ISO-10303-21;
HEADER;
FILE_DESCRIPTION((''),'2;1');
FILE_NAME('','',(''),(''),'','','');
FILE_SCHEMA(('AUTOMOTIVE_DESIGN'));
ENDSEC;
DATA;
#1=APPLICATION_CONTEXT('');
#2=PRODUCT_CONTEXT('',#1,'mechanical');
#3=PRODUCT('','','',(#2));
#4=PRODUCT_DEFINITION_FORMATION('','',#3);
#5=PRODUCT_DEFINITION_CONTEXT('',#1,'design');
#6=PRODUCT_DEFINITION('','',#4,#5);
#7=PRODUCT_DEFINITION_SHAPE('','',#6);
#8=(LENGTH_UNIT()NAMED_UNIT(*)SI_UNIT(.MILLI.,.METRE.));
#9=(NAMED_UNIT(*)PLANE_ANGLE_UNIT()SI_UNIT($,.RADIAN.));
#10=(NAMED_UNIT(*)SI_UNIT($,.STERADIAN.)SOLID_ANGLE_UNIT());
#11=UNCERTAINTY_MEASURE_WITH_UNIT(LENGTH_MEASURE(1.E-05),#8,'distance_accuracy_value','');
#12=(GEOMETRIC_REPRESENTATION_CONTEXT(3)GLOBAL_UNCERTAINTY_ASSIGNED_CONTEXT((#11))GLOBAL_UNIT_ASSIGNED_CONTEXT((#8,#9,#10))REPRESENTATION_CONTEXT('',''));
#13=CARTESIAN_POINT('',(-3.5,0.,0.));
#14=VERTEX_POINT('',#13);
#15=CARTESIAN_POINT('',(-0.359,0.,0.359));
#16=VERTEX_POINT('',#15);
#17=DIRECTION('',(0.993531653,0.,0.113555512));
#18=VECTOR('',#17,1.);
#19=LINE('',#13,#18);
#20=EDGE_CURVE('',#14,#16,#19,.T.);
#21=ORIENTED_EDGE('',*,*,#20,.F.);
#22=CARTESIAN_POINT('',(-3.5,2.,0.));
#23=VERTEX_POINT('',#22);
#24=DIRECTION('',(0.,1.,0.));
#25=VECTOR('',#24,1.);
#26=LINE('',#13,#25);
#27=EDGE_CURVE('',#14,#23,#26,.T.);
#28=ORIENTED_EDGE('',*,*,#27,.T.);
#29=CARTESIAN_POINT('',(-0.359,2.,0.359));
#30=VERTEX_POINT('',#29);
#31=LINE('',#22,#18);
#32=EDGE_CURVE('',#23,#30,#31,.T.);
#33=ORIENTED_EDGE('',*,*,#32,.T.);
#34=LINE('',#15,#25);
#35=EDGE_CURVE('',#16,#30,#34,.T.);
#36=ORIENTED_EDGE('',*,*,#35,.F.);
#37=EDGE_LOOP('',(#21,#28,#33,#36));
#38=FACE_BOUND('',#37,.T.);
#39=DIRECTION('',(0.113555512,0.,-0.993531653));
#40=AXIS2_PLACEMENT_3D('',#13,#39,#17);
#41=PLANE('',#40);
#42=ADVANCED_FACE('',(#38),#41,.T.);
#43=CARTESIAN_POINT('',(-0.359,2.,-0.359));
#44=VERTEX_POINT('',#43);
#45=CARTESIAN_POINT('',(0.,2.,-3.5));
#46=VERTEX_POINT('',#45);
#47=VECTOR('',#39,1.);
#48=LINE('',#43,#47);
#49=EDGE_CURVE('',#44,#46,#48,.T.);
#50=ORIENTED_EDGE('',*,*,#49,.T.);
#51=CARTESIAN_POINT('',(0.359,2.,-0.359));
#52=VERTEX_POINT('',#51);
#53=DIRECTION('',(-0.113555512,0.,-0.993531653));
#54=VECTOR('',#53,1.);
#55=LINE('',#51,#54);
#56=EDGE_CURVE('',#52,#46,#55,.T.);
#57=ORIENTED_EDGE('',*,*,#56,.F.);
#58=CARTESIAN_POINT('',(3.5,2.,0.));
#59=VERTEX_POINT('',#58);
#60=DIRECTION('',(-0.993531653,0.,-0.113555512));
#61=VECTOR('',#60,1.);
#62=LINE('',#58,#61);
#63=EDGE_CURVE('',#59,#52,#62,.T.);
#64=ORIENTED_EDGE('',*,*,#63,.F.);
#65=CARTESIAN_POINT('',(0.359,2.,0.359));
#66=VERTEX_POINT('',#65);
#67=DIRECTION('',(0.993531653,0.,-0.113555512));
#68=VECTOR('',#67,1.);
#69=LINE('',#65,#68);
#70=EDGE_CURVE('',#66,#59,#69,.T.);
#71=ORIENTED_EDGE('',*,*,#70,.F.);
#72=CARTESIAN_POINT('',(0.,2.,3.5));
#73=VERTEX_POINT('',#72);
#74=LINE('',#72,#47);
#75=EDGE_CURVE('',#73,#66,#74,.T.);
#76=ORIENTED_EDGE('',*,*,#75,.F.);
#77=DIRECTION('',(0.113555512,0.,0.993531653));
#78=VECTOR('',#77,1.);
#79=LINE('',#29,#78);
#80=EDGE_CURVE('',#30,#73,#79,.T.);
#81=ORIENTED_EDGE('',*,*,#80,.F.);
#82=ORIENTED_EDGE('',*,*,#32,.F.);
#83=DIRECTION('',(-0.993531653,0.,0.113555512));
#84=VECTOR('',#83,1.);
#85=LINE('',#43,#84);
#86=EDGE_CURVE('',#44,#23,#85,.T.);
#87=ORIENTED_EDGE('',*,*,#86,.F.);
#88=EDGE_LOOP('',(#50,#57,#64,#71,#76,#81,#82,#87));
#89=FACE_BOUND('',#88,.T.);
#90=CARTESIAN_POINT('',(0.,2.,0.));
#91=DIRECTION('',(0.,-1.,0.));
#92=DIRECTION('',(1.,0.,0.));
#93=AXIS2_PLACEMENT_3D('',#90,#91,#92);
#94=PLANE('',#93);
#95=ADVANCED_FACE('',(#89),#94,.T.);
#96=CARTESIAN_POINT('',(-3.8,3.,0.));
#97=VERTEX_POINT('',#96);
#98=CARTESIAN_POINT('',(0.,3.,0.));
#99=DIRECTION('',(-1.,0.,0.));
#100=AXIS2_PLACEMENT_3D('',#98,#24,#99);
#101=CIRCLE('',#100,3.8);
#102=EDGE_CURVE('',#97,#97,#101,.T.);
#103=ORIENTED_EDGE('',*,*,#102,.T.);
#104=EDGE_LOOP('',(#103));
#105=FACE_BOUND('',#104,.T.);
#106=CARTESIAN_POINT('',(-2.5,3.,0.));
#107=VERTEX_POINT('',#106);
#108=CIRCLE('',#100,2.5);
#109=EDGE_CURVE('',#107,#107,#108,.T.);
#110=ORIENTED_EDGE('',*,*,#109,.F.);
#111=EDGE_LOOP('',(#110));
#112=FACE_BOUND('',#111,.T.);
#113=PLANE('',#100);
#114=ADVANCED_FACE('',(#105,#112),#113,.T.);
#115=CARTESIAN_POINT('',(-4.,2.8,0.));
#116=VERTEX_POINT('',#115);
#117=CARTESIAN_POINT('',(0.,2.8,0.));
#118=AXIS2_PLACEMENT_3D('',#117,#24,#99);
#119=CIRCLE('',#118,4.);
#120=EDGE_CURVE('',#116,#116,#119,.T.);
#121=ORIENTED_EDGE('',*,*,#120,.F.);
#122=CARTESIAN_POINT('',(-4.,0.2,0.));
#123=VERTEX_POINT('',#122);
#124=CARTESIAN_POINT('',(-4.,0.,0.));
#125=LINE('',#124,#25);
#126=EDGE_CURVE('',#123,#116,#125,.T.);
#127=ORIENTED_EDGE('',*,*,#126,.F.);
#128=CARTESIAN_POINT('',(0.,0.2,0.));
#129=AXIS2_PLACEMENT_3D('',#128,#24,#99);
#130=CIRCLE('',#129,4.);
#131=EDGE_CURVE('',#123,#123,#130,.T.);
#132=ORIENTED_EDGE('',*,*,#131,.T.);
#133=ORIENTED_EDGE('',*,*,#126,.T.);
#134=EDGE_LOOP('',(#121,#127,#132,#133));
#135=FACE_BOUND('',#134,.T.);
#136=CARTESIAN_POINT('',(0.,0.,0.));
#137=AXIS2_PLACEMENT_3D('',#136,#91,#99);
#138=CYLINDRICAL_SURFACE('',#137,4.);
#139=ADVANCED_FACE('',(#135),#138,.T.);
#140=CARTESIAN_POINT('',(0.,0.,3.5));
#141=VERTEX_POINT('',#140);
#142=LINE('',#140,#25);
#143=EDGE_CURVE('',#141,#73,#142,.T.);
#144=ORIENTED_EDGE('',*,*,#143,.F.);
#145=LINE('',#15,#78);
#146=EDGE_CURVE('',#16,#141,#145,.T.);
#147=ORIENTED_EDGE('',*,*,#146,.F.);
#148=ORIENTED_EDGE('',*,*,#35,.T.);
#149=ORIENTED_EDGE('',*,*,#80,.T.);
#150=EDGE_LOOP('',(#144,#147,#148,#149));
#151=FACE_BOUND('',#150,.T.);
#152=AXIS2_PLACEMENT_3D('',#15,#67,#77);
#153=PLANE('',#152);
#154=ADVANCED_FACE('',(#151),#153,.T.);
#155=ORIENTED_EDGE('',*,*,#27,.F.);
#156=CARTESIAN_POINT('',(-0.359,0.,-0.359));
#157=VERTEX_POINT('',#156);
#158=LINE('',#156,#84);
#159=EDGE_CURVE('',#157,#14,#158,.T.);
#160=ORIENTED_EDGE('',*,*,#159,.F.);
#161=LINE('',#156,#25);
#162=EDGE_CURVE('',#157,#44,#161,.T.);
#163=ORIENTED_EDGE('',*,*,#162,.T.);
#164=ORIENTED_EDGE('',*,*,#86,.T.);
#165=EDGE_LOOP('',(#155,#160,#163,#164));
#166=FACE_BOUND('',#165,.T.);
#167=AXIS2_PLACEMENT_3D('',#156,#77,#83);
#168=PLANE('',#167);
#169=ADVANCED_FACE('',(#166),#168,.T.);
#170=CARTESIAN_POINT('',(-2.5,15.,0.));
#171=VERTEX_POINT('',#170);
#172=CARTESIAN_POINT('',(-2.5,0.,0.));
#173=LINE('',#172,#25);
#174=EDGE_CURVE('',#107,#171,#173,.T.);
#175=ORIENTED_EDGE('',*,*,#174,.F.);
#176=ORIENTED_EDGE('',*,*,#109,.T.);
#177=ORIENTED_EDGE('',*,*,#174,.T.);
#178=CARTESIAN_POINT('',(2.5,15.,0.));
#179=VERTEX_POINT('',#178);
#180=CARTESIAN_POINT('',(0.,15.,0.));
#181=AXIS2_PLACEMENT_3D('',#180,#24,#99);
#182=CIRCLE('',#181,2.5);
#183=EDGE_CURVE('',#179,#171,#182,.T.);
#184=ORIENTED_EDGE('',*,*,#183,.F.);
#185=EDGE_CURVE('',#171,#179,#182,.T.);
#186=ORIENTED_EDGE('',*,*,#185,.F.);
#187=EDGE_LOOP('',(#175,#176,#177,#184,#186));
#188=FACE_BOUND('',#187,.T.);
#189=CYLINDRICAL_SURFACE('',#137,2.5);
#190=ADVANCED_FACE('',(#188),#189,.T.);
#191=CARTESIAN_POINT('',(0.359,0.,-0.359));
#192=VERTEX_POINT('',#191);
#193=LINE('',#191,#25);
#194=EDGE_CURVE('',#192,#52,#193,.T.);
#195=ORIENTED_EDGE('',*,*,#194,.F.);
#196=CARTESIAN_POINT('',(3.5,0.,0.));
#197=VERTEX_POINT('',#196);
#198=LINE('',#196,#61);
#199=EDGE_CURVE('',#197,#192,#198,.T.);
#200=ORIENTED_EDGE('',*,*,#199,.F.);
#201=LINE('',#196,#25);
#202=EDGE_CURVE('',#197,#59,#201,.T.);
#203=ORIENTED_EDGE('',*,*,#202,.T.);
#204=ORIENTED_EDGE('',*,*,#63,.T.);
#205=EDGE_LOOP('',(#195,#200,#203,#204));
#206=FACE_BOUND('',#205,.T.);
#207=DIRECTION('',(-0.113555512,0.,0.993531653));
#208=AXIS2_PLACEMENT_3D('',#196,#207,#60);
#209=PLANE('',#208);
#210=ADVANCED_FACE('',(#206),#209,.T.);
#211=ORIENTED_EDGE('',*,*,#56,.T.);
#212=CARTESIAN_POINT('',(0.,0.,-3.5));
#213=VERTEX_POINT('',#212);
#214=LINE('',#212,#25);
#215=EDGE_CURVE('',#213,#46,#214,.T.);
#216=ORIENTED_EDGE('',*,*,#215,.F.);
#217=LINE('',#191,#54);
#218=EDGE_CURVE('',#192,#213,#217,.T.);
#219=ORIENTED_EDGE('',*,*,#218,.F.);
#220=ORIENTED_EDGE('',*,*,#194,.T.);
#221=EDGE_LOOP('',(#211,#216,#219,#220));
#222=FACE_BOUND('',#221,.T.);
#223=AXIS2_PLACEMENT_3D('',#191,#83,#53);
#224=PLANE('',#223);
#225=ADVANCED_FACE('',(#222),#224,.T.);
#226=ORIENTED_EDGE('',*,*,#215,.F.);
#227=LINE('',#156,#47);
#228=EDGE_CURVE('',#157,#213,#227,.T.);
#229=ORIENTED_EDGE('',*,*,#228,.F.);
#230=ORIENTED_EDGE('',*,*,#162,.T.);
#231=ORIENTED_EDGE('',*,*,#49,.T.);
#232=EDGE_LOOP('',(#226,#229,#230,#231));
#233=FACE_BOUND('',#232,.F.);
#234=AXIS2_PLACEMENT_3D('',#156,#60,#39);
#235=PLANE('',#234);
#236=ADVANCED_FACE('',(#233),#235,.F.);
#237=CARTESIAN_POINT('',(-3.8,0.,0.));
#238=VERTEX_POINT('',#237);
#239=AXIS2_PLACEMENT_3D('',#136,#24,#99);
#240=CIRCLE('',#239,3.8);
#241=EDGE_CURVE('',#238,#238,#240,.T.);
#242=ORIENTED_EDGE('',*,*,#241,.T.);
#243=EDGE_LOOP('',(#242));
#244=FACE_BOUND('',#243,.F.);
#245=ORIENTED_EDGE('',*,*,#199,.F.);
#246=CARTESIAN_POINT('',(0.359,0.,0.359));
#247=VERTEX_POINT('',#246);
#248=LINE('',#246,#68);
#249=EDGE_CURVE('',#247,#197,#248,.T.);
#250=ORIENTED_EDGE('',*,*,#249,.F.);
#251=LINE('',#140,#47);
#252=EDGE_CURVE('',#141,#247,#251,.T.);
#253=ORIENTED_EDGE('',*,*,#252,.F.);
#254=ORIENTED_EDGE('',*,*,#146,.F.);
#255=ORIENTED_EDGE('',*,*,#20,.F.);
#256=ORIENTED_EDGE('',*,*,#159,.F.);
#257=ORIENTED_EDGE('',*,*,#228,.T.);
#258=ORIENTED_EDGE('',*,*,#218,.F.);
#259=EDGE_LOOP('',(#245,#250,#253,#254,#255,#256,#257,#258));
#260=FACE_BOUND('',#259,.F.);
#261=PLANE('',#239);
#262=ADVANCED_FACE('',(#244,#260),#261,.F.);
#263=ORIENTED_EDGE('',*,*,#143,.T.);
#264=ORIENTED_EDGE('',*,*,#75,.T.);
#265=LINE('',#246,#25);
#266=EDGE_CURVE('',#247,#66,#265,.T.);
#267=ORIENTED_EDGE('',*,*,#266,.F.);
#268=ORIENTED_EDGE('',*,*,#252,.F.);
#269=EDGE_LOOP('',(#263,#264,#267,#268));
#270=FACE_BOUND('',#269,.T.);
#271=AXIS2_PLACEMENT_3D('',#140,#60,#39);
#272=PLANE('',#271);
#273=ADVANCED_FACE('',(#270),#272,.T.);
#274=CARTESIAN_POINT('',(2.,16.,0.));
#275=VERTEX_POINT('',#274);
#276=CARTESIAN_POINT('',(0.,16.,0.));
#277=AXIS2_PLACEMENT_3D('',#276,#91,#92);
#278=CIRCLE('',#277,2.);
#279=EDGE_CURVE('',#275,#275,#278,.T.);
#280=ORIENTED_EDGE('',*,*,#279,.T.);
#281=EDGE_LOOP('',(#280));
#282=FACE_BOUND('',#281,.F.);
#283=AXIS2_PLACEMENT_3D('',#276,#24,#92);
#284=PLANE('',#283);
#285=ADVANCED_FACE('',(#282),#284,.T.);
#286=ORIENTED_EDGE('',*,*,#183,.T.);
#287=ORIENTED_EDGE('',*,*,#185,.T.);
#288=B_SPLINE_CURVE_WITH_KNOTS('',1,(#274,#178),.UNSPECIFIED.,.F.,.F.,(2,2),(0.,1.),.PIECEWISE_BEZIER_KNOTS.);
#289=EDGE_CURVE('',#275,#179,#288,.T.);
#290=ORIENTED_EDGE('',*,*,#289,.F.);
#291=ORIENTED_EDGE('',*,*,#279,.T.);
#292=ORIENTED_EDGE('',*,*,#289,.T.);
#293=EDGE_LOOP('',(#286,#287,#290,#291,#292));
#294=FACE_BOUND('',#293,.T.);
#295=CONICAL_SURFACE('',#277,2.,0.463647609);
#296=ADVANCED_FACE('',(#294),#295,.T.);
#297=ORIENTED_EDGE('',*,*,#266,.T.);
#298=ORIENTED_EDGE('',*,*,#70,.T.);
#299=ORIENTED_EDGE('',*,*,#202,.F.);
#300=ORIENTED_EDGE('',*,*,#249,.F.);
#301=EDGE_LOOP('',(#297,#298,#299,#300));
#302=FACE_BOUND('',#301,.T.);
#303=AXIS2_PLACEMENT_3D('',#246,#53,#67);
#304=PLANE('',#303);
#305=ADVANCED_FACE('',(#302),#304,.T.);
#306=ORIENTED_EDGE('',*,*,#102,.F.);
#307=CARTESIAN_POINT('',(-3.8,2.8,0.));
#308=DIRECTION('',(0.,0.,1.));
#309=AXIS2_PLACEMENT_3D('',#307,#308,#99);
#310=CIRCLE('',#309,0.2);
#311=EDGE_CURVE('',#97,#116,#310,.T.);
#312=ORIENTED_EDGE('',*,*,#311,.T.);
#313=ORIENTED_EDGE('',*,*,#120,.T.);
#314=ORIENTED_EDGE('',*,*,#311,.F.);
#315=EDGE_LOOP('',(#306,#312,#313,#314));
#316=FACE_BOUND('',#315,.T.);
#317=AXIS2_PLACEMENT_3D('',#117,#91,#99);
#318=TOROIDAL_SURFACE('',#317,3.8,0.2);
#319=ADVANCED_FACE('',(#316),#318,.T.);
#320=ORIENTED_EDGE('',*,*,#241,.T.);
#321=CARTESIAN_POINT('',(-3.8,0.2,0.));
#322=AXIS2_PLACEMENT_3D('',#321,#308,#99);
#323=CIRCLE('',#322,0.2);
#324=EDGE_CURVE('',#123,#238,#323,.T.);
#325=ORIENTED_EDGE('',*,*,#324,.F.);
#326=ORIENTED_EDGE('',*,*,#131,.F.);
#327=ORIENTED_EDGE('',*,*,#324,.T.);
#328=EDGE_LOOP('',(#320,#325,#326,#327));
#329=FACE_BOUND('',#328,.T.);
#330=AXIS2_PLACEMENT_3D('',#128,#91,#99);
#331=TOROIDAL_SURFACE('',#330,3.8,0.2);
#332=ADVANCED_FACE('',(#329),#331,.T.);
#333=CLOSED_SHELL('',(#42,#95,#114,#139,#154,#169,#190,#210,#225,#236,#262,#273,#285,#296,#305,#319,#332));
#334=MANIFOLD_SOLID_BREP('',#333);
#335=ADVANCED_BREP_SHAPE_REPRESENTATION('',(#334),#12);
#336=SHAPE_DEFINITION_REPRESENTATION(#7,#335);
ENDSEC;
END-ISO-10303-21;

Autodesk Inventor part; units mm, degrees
ref_plane "YZ Plane" through (0, 0, 0) normal (1, 0, 0) x (0, 1, 0)
ref_plane "XZ Plane" through (0, 0, 0) normal (0, 1, 0) x (-1, 0, 0)
ref_plane "XY Plane" through (0, 0, 0) normal (0, 0, 1) x (1, 0, 0)
sketch "Sketch1" plane through (0, 0, 0) normal (0, 1, 0) x (-1, 0, 0)
  circle A0 centre (0, 0) radius 2.5
  circle A1 centre (0, 0) radius 4
  dimension "d0" = 5
  dimension "d1" = 8
extrude "Extrusion1" add sketch "Sketch1" along normal blind 15 contours A0
extrude "Extrusion2" add sketch "Sketch1" along normal blind 3
sketch "Sketch3" plane through (0, 0, 0) normal (0, -1, 0) x (1, 0, 0)
  line L0 (0, 0) -> (0, -0.4) construction
  circle A0 centre (0, 0) radius 4 projected
  line L1 (4, 0) -> (3.5, 0) construction
  line L2 (0, 0) -> (0, 0.4) construction
  line L3 (0.359, 0.359) -> (3.5, 0)
  line L4 (3.5, 0) -> (0.359, -0.359)
  line L5 (0.359, -0.359) -> (0, -3.5)
  line L6 (-0.359, -0.359) -> (0, -3.5)
  line L7 (-0.359, -0.359) -> (-3.5, 0)
  line L8 (-3.5, 0) -> (-0.359, 0.359)
  line L9 (-0.359, 0.359) -> (0, 3.5)
  line L10 (0, 3.5) -> (0.359, 0.359)
  dimension "d14" = 0.4
  dimension "d15" = 0.5
  dimension "d16" = 0.4
  dimension "d21" = 103.04
  dimension "d22" = 103.04
  dimension "d23" = 13.04
  dimension "d24" = 3.1615
  dimension "d25" = 3.1615
extrude "Extrusion3" cut sketch "Sketch3" against normal blind 2 contours L3 L4 L5 L6 L7 L8 L9 L10
fillet "Fillet1" radius 0.2 2 edges at (4, 0, 0) (4, 3, 0)
thread "Thread1" size "M5x0.8" class "6g" standard "ANSI Metric M Profile" full length
sketch "Sketch4" plane through (0, 15, 0) normal (0, 1, 0) x (1, 0, 0)
  circle A0 centre (0, 0) radius 2
  dimension "d31" = 4
extrude "Extrusion4" add sketch "Sketch4" along normal blind 1
loft "Loft1" add section 1 edges at (-2, 16, 0) section 2 edges at (2.5, 15, 0)
thread "Thread2" size "R 5" standard "ISO Taper" full length
properties part number "m5x12mmscrew"
